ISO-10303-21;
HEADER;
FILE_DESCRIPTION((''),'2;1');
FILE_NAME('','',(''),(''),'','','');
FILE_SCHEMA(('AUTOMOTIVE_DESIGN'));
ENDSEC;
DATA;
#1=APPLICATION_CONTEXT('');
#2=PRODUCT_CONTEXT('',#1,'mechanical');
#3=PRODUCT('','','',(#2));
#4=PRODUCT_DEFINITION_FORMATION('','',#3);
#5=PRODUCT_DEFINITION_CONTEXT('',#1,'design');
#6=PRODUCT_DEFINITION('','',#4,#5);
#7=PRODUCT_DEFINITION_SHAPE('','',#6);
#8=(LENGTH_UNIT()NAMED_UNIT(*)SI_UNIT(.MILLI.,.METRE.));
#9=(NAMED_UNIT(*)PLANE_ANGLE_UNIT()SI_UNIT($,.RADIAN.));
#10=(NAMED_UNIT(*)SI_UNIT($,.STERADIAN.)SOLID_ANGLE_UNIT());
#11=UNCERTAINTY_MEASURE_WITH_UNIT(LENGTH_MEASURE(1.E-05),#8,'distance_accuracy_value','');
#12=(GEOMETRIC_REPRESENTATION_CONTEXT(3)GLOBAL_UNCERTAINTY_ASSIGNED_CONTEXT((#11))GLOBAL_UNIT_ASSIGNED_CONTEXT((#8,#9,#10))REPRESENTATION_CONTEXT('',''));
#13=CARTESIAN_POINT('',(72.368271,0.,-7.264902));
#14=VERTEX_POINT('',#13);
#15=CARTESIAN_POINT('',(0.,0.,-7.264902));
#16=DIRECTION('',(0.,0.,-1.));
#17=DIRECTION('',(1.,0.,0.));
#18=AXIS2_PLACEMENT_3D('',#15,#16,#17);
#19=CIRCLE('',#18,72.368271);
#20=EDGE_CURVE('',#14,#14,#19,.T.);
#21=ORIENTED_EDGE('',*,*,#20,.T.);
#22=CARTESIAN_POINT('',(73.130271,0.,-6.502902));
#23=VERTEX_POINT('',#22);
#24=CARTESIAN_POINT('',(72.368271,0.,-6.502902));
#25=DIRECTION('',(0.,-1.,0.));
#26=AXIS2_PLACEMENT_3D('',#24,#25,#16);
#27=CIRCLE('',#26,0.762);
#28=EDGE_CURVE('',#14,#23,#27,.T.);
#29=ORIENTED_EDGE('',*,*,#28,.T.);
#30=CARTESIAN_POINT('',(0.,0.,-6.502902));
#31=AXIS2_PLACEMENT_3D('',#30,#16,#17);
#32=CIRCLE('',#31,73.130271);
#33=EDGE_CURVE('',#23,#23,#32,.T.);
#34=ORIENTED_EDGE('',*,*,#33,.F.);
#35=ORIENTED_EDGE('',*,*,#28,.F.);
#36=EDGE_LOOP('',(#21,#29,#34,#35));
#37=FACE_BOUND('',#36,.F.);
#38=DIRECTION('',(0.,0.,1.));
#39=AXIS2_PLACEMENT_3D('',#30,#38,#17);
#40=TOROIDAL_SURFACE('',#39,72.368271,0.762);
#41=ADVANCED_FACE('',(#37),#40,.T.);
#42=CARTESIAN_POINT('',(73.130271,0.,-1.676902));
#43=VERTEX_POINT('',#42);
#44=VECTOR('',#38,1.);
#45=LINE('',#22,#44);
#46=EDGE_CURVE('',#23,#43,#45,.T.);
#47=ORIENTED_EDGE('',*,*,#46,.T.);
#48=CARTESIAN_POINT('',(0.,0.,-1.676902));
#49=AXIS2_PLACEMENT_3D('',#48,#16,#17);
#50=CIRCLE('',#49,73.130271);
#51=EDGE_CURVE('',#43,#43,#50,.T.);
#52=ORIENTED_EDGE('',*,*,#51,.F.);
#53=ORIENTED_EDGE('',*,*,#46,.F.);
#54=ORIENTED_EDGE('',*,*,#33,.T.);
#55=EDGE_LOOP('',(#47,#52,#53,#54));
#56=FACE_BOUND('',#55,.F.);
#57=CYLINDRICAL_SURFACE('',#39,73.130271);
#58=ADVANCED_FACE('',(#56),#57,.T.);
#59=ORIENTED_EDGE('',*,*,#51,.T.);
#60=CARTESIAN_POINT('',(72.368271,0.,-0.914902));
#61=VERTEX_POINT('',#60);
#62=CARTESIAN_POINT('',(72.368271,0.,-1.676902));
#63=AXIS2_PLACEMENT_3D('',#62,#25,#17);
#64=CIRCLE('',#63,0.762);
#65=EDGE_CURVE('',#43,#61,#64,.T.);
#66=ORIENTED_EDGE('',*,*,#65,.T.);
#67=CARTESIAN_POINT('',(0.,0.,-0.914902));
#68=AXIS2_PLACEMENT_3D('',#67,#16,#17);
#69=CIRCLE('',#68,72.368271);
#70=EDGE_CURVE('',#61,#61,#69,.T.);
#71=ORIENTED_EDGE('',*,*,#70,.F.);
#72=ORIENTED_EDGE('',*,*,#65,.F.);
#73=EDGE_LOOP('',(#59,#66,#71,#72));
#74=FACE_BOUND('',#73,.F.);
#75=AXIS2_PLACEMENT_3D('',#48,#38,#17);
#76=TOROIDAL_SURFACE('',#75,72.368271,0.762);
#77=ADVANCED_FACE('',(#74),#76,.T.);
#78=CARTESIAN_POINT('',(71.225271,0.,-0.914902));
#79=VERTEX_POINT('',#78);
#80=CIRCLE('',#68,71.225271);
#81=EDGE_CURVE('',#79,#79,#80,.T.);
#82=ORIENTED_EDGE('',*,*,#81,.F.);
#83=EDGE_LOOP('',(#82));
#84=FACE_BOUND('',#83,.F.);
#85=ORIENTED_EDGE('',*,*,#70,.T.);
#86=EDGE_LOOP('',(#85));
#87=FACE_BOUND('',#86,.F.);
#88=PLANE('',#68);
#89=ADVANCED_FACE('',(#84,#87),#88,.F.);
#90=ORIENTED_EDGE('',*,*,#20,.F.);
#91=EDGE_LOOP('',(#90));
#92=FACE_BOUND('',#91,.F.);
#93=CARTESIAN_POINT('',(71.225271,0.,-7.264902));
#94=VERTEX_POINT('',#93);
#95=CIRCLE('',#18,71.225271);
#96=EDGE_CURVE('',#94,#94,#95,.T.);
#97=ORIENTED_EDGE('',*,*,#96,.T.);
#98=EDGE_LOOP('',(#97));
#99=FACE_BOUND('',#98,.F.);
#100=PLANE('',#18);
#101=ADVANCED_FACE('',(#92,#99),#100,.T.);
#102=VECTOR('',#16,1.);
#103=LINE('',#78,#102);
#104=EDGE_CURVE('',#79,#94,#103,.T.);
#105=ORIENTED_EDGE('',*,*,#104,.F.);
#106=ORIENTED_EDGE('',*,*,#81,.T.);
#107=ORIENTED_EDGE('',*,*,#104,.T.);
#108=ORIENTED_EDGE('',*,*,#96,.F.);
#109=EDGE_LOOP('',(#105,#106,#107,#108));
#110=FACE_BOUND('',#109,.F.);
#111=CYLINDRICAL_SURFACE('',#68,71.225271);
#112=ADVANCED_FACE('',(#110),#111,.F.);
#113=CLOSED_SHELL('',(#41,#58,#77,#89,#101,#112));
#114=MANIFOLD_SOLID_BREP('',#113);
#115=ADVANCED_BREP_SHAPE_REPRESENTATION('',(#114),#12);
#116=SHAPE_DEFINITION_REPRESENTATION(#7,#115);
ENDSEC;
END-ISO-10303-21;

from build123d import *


# Not quite as in the source:
# - the program builds the solid bodies; features that only make, move or delete a surface that nothing else refers to are left out


with BuildPart() as f3:
    # F2 (on Front) → F3 (revolve)
    with BuildSketch(Plane.XZ):
        with BuildLine():
            Line((71.2252706289, -0.9149015559), (71.2252706289, -7.2649015559))
            Line((71.2252706289, -7.2649015559), (72.3682706289, -7.2649015559))
            ThreePointArc((72.3682706289, -7.2649015559), (72.9070859962, -7.0417169231), (73.1302706289, -6.5029015559))
            Line((73.1302706289, -6.5029015559), (73.1302706289, -1.6769015559))
            ThreePointArc((73.1302706289, -1.6769015559), (72.9070859962, -1.1380861886), (72.3682706289, -0.9149015559))
            Line((72.3682706289, -0.9149015559), (71.2252706289, -0.9149015559))
        make_face()
    revolve(axis=Axis((0, 0, -37.46373), (0, 0, -1)))


solid = f3.part
